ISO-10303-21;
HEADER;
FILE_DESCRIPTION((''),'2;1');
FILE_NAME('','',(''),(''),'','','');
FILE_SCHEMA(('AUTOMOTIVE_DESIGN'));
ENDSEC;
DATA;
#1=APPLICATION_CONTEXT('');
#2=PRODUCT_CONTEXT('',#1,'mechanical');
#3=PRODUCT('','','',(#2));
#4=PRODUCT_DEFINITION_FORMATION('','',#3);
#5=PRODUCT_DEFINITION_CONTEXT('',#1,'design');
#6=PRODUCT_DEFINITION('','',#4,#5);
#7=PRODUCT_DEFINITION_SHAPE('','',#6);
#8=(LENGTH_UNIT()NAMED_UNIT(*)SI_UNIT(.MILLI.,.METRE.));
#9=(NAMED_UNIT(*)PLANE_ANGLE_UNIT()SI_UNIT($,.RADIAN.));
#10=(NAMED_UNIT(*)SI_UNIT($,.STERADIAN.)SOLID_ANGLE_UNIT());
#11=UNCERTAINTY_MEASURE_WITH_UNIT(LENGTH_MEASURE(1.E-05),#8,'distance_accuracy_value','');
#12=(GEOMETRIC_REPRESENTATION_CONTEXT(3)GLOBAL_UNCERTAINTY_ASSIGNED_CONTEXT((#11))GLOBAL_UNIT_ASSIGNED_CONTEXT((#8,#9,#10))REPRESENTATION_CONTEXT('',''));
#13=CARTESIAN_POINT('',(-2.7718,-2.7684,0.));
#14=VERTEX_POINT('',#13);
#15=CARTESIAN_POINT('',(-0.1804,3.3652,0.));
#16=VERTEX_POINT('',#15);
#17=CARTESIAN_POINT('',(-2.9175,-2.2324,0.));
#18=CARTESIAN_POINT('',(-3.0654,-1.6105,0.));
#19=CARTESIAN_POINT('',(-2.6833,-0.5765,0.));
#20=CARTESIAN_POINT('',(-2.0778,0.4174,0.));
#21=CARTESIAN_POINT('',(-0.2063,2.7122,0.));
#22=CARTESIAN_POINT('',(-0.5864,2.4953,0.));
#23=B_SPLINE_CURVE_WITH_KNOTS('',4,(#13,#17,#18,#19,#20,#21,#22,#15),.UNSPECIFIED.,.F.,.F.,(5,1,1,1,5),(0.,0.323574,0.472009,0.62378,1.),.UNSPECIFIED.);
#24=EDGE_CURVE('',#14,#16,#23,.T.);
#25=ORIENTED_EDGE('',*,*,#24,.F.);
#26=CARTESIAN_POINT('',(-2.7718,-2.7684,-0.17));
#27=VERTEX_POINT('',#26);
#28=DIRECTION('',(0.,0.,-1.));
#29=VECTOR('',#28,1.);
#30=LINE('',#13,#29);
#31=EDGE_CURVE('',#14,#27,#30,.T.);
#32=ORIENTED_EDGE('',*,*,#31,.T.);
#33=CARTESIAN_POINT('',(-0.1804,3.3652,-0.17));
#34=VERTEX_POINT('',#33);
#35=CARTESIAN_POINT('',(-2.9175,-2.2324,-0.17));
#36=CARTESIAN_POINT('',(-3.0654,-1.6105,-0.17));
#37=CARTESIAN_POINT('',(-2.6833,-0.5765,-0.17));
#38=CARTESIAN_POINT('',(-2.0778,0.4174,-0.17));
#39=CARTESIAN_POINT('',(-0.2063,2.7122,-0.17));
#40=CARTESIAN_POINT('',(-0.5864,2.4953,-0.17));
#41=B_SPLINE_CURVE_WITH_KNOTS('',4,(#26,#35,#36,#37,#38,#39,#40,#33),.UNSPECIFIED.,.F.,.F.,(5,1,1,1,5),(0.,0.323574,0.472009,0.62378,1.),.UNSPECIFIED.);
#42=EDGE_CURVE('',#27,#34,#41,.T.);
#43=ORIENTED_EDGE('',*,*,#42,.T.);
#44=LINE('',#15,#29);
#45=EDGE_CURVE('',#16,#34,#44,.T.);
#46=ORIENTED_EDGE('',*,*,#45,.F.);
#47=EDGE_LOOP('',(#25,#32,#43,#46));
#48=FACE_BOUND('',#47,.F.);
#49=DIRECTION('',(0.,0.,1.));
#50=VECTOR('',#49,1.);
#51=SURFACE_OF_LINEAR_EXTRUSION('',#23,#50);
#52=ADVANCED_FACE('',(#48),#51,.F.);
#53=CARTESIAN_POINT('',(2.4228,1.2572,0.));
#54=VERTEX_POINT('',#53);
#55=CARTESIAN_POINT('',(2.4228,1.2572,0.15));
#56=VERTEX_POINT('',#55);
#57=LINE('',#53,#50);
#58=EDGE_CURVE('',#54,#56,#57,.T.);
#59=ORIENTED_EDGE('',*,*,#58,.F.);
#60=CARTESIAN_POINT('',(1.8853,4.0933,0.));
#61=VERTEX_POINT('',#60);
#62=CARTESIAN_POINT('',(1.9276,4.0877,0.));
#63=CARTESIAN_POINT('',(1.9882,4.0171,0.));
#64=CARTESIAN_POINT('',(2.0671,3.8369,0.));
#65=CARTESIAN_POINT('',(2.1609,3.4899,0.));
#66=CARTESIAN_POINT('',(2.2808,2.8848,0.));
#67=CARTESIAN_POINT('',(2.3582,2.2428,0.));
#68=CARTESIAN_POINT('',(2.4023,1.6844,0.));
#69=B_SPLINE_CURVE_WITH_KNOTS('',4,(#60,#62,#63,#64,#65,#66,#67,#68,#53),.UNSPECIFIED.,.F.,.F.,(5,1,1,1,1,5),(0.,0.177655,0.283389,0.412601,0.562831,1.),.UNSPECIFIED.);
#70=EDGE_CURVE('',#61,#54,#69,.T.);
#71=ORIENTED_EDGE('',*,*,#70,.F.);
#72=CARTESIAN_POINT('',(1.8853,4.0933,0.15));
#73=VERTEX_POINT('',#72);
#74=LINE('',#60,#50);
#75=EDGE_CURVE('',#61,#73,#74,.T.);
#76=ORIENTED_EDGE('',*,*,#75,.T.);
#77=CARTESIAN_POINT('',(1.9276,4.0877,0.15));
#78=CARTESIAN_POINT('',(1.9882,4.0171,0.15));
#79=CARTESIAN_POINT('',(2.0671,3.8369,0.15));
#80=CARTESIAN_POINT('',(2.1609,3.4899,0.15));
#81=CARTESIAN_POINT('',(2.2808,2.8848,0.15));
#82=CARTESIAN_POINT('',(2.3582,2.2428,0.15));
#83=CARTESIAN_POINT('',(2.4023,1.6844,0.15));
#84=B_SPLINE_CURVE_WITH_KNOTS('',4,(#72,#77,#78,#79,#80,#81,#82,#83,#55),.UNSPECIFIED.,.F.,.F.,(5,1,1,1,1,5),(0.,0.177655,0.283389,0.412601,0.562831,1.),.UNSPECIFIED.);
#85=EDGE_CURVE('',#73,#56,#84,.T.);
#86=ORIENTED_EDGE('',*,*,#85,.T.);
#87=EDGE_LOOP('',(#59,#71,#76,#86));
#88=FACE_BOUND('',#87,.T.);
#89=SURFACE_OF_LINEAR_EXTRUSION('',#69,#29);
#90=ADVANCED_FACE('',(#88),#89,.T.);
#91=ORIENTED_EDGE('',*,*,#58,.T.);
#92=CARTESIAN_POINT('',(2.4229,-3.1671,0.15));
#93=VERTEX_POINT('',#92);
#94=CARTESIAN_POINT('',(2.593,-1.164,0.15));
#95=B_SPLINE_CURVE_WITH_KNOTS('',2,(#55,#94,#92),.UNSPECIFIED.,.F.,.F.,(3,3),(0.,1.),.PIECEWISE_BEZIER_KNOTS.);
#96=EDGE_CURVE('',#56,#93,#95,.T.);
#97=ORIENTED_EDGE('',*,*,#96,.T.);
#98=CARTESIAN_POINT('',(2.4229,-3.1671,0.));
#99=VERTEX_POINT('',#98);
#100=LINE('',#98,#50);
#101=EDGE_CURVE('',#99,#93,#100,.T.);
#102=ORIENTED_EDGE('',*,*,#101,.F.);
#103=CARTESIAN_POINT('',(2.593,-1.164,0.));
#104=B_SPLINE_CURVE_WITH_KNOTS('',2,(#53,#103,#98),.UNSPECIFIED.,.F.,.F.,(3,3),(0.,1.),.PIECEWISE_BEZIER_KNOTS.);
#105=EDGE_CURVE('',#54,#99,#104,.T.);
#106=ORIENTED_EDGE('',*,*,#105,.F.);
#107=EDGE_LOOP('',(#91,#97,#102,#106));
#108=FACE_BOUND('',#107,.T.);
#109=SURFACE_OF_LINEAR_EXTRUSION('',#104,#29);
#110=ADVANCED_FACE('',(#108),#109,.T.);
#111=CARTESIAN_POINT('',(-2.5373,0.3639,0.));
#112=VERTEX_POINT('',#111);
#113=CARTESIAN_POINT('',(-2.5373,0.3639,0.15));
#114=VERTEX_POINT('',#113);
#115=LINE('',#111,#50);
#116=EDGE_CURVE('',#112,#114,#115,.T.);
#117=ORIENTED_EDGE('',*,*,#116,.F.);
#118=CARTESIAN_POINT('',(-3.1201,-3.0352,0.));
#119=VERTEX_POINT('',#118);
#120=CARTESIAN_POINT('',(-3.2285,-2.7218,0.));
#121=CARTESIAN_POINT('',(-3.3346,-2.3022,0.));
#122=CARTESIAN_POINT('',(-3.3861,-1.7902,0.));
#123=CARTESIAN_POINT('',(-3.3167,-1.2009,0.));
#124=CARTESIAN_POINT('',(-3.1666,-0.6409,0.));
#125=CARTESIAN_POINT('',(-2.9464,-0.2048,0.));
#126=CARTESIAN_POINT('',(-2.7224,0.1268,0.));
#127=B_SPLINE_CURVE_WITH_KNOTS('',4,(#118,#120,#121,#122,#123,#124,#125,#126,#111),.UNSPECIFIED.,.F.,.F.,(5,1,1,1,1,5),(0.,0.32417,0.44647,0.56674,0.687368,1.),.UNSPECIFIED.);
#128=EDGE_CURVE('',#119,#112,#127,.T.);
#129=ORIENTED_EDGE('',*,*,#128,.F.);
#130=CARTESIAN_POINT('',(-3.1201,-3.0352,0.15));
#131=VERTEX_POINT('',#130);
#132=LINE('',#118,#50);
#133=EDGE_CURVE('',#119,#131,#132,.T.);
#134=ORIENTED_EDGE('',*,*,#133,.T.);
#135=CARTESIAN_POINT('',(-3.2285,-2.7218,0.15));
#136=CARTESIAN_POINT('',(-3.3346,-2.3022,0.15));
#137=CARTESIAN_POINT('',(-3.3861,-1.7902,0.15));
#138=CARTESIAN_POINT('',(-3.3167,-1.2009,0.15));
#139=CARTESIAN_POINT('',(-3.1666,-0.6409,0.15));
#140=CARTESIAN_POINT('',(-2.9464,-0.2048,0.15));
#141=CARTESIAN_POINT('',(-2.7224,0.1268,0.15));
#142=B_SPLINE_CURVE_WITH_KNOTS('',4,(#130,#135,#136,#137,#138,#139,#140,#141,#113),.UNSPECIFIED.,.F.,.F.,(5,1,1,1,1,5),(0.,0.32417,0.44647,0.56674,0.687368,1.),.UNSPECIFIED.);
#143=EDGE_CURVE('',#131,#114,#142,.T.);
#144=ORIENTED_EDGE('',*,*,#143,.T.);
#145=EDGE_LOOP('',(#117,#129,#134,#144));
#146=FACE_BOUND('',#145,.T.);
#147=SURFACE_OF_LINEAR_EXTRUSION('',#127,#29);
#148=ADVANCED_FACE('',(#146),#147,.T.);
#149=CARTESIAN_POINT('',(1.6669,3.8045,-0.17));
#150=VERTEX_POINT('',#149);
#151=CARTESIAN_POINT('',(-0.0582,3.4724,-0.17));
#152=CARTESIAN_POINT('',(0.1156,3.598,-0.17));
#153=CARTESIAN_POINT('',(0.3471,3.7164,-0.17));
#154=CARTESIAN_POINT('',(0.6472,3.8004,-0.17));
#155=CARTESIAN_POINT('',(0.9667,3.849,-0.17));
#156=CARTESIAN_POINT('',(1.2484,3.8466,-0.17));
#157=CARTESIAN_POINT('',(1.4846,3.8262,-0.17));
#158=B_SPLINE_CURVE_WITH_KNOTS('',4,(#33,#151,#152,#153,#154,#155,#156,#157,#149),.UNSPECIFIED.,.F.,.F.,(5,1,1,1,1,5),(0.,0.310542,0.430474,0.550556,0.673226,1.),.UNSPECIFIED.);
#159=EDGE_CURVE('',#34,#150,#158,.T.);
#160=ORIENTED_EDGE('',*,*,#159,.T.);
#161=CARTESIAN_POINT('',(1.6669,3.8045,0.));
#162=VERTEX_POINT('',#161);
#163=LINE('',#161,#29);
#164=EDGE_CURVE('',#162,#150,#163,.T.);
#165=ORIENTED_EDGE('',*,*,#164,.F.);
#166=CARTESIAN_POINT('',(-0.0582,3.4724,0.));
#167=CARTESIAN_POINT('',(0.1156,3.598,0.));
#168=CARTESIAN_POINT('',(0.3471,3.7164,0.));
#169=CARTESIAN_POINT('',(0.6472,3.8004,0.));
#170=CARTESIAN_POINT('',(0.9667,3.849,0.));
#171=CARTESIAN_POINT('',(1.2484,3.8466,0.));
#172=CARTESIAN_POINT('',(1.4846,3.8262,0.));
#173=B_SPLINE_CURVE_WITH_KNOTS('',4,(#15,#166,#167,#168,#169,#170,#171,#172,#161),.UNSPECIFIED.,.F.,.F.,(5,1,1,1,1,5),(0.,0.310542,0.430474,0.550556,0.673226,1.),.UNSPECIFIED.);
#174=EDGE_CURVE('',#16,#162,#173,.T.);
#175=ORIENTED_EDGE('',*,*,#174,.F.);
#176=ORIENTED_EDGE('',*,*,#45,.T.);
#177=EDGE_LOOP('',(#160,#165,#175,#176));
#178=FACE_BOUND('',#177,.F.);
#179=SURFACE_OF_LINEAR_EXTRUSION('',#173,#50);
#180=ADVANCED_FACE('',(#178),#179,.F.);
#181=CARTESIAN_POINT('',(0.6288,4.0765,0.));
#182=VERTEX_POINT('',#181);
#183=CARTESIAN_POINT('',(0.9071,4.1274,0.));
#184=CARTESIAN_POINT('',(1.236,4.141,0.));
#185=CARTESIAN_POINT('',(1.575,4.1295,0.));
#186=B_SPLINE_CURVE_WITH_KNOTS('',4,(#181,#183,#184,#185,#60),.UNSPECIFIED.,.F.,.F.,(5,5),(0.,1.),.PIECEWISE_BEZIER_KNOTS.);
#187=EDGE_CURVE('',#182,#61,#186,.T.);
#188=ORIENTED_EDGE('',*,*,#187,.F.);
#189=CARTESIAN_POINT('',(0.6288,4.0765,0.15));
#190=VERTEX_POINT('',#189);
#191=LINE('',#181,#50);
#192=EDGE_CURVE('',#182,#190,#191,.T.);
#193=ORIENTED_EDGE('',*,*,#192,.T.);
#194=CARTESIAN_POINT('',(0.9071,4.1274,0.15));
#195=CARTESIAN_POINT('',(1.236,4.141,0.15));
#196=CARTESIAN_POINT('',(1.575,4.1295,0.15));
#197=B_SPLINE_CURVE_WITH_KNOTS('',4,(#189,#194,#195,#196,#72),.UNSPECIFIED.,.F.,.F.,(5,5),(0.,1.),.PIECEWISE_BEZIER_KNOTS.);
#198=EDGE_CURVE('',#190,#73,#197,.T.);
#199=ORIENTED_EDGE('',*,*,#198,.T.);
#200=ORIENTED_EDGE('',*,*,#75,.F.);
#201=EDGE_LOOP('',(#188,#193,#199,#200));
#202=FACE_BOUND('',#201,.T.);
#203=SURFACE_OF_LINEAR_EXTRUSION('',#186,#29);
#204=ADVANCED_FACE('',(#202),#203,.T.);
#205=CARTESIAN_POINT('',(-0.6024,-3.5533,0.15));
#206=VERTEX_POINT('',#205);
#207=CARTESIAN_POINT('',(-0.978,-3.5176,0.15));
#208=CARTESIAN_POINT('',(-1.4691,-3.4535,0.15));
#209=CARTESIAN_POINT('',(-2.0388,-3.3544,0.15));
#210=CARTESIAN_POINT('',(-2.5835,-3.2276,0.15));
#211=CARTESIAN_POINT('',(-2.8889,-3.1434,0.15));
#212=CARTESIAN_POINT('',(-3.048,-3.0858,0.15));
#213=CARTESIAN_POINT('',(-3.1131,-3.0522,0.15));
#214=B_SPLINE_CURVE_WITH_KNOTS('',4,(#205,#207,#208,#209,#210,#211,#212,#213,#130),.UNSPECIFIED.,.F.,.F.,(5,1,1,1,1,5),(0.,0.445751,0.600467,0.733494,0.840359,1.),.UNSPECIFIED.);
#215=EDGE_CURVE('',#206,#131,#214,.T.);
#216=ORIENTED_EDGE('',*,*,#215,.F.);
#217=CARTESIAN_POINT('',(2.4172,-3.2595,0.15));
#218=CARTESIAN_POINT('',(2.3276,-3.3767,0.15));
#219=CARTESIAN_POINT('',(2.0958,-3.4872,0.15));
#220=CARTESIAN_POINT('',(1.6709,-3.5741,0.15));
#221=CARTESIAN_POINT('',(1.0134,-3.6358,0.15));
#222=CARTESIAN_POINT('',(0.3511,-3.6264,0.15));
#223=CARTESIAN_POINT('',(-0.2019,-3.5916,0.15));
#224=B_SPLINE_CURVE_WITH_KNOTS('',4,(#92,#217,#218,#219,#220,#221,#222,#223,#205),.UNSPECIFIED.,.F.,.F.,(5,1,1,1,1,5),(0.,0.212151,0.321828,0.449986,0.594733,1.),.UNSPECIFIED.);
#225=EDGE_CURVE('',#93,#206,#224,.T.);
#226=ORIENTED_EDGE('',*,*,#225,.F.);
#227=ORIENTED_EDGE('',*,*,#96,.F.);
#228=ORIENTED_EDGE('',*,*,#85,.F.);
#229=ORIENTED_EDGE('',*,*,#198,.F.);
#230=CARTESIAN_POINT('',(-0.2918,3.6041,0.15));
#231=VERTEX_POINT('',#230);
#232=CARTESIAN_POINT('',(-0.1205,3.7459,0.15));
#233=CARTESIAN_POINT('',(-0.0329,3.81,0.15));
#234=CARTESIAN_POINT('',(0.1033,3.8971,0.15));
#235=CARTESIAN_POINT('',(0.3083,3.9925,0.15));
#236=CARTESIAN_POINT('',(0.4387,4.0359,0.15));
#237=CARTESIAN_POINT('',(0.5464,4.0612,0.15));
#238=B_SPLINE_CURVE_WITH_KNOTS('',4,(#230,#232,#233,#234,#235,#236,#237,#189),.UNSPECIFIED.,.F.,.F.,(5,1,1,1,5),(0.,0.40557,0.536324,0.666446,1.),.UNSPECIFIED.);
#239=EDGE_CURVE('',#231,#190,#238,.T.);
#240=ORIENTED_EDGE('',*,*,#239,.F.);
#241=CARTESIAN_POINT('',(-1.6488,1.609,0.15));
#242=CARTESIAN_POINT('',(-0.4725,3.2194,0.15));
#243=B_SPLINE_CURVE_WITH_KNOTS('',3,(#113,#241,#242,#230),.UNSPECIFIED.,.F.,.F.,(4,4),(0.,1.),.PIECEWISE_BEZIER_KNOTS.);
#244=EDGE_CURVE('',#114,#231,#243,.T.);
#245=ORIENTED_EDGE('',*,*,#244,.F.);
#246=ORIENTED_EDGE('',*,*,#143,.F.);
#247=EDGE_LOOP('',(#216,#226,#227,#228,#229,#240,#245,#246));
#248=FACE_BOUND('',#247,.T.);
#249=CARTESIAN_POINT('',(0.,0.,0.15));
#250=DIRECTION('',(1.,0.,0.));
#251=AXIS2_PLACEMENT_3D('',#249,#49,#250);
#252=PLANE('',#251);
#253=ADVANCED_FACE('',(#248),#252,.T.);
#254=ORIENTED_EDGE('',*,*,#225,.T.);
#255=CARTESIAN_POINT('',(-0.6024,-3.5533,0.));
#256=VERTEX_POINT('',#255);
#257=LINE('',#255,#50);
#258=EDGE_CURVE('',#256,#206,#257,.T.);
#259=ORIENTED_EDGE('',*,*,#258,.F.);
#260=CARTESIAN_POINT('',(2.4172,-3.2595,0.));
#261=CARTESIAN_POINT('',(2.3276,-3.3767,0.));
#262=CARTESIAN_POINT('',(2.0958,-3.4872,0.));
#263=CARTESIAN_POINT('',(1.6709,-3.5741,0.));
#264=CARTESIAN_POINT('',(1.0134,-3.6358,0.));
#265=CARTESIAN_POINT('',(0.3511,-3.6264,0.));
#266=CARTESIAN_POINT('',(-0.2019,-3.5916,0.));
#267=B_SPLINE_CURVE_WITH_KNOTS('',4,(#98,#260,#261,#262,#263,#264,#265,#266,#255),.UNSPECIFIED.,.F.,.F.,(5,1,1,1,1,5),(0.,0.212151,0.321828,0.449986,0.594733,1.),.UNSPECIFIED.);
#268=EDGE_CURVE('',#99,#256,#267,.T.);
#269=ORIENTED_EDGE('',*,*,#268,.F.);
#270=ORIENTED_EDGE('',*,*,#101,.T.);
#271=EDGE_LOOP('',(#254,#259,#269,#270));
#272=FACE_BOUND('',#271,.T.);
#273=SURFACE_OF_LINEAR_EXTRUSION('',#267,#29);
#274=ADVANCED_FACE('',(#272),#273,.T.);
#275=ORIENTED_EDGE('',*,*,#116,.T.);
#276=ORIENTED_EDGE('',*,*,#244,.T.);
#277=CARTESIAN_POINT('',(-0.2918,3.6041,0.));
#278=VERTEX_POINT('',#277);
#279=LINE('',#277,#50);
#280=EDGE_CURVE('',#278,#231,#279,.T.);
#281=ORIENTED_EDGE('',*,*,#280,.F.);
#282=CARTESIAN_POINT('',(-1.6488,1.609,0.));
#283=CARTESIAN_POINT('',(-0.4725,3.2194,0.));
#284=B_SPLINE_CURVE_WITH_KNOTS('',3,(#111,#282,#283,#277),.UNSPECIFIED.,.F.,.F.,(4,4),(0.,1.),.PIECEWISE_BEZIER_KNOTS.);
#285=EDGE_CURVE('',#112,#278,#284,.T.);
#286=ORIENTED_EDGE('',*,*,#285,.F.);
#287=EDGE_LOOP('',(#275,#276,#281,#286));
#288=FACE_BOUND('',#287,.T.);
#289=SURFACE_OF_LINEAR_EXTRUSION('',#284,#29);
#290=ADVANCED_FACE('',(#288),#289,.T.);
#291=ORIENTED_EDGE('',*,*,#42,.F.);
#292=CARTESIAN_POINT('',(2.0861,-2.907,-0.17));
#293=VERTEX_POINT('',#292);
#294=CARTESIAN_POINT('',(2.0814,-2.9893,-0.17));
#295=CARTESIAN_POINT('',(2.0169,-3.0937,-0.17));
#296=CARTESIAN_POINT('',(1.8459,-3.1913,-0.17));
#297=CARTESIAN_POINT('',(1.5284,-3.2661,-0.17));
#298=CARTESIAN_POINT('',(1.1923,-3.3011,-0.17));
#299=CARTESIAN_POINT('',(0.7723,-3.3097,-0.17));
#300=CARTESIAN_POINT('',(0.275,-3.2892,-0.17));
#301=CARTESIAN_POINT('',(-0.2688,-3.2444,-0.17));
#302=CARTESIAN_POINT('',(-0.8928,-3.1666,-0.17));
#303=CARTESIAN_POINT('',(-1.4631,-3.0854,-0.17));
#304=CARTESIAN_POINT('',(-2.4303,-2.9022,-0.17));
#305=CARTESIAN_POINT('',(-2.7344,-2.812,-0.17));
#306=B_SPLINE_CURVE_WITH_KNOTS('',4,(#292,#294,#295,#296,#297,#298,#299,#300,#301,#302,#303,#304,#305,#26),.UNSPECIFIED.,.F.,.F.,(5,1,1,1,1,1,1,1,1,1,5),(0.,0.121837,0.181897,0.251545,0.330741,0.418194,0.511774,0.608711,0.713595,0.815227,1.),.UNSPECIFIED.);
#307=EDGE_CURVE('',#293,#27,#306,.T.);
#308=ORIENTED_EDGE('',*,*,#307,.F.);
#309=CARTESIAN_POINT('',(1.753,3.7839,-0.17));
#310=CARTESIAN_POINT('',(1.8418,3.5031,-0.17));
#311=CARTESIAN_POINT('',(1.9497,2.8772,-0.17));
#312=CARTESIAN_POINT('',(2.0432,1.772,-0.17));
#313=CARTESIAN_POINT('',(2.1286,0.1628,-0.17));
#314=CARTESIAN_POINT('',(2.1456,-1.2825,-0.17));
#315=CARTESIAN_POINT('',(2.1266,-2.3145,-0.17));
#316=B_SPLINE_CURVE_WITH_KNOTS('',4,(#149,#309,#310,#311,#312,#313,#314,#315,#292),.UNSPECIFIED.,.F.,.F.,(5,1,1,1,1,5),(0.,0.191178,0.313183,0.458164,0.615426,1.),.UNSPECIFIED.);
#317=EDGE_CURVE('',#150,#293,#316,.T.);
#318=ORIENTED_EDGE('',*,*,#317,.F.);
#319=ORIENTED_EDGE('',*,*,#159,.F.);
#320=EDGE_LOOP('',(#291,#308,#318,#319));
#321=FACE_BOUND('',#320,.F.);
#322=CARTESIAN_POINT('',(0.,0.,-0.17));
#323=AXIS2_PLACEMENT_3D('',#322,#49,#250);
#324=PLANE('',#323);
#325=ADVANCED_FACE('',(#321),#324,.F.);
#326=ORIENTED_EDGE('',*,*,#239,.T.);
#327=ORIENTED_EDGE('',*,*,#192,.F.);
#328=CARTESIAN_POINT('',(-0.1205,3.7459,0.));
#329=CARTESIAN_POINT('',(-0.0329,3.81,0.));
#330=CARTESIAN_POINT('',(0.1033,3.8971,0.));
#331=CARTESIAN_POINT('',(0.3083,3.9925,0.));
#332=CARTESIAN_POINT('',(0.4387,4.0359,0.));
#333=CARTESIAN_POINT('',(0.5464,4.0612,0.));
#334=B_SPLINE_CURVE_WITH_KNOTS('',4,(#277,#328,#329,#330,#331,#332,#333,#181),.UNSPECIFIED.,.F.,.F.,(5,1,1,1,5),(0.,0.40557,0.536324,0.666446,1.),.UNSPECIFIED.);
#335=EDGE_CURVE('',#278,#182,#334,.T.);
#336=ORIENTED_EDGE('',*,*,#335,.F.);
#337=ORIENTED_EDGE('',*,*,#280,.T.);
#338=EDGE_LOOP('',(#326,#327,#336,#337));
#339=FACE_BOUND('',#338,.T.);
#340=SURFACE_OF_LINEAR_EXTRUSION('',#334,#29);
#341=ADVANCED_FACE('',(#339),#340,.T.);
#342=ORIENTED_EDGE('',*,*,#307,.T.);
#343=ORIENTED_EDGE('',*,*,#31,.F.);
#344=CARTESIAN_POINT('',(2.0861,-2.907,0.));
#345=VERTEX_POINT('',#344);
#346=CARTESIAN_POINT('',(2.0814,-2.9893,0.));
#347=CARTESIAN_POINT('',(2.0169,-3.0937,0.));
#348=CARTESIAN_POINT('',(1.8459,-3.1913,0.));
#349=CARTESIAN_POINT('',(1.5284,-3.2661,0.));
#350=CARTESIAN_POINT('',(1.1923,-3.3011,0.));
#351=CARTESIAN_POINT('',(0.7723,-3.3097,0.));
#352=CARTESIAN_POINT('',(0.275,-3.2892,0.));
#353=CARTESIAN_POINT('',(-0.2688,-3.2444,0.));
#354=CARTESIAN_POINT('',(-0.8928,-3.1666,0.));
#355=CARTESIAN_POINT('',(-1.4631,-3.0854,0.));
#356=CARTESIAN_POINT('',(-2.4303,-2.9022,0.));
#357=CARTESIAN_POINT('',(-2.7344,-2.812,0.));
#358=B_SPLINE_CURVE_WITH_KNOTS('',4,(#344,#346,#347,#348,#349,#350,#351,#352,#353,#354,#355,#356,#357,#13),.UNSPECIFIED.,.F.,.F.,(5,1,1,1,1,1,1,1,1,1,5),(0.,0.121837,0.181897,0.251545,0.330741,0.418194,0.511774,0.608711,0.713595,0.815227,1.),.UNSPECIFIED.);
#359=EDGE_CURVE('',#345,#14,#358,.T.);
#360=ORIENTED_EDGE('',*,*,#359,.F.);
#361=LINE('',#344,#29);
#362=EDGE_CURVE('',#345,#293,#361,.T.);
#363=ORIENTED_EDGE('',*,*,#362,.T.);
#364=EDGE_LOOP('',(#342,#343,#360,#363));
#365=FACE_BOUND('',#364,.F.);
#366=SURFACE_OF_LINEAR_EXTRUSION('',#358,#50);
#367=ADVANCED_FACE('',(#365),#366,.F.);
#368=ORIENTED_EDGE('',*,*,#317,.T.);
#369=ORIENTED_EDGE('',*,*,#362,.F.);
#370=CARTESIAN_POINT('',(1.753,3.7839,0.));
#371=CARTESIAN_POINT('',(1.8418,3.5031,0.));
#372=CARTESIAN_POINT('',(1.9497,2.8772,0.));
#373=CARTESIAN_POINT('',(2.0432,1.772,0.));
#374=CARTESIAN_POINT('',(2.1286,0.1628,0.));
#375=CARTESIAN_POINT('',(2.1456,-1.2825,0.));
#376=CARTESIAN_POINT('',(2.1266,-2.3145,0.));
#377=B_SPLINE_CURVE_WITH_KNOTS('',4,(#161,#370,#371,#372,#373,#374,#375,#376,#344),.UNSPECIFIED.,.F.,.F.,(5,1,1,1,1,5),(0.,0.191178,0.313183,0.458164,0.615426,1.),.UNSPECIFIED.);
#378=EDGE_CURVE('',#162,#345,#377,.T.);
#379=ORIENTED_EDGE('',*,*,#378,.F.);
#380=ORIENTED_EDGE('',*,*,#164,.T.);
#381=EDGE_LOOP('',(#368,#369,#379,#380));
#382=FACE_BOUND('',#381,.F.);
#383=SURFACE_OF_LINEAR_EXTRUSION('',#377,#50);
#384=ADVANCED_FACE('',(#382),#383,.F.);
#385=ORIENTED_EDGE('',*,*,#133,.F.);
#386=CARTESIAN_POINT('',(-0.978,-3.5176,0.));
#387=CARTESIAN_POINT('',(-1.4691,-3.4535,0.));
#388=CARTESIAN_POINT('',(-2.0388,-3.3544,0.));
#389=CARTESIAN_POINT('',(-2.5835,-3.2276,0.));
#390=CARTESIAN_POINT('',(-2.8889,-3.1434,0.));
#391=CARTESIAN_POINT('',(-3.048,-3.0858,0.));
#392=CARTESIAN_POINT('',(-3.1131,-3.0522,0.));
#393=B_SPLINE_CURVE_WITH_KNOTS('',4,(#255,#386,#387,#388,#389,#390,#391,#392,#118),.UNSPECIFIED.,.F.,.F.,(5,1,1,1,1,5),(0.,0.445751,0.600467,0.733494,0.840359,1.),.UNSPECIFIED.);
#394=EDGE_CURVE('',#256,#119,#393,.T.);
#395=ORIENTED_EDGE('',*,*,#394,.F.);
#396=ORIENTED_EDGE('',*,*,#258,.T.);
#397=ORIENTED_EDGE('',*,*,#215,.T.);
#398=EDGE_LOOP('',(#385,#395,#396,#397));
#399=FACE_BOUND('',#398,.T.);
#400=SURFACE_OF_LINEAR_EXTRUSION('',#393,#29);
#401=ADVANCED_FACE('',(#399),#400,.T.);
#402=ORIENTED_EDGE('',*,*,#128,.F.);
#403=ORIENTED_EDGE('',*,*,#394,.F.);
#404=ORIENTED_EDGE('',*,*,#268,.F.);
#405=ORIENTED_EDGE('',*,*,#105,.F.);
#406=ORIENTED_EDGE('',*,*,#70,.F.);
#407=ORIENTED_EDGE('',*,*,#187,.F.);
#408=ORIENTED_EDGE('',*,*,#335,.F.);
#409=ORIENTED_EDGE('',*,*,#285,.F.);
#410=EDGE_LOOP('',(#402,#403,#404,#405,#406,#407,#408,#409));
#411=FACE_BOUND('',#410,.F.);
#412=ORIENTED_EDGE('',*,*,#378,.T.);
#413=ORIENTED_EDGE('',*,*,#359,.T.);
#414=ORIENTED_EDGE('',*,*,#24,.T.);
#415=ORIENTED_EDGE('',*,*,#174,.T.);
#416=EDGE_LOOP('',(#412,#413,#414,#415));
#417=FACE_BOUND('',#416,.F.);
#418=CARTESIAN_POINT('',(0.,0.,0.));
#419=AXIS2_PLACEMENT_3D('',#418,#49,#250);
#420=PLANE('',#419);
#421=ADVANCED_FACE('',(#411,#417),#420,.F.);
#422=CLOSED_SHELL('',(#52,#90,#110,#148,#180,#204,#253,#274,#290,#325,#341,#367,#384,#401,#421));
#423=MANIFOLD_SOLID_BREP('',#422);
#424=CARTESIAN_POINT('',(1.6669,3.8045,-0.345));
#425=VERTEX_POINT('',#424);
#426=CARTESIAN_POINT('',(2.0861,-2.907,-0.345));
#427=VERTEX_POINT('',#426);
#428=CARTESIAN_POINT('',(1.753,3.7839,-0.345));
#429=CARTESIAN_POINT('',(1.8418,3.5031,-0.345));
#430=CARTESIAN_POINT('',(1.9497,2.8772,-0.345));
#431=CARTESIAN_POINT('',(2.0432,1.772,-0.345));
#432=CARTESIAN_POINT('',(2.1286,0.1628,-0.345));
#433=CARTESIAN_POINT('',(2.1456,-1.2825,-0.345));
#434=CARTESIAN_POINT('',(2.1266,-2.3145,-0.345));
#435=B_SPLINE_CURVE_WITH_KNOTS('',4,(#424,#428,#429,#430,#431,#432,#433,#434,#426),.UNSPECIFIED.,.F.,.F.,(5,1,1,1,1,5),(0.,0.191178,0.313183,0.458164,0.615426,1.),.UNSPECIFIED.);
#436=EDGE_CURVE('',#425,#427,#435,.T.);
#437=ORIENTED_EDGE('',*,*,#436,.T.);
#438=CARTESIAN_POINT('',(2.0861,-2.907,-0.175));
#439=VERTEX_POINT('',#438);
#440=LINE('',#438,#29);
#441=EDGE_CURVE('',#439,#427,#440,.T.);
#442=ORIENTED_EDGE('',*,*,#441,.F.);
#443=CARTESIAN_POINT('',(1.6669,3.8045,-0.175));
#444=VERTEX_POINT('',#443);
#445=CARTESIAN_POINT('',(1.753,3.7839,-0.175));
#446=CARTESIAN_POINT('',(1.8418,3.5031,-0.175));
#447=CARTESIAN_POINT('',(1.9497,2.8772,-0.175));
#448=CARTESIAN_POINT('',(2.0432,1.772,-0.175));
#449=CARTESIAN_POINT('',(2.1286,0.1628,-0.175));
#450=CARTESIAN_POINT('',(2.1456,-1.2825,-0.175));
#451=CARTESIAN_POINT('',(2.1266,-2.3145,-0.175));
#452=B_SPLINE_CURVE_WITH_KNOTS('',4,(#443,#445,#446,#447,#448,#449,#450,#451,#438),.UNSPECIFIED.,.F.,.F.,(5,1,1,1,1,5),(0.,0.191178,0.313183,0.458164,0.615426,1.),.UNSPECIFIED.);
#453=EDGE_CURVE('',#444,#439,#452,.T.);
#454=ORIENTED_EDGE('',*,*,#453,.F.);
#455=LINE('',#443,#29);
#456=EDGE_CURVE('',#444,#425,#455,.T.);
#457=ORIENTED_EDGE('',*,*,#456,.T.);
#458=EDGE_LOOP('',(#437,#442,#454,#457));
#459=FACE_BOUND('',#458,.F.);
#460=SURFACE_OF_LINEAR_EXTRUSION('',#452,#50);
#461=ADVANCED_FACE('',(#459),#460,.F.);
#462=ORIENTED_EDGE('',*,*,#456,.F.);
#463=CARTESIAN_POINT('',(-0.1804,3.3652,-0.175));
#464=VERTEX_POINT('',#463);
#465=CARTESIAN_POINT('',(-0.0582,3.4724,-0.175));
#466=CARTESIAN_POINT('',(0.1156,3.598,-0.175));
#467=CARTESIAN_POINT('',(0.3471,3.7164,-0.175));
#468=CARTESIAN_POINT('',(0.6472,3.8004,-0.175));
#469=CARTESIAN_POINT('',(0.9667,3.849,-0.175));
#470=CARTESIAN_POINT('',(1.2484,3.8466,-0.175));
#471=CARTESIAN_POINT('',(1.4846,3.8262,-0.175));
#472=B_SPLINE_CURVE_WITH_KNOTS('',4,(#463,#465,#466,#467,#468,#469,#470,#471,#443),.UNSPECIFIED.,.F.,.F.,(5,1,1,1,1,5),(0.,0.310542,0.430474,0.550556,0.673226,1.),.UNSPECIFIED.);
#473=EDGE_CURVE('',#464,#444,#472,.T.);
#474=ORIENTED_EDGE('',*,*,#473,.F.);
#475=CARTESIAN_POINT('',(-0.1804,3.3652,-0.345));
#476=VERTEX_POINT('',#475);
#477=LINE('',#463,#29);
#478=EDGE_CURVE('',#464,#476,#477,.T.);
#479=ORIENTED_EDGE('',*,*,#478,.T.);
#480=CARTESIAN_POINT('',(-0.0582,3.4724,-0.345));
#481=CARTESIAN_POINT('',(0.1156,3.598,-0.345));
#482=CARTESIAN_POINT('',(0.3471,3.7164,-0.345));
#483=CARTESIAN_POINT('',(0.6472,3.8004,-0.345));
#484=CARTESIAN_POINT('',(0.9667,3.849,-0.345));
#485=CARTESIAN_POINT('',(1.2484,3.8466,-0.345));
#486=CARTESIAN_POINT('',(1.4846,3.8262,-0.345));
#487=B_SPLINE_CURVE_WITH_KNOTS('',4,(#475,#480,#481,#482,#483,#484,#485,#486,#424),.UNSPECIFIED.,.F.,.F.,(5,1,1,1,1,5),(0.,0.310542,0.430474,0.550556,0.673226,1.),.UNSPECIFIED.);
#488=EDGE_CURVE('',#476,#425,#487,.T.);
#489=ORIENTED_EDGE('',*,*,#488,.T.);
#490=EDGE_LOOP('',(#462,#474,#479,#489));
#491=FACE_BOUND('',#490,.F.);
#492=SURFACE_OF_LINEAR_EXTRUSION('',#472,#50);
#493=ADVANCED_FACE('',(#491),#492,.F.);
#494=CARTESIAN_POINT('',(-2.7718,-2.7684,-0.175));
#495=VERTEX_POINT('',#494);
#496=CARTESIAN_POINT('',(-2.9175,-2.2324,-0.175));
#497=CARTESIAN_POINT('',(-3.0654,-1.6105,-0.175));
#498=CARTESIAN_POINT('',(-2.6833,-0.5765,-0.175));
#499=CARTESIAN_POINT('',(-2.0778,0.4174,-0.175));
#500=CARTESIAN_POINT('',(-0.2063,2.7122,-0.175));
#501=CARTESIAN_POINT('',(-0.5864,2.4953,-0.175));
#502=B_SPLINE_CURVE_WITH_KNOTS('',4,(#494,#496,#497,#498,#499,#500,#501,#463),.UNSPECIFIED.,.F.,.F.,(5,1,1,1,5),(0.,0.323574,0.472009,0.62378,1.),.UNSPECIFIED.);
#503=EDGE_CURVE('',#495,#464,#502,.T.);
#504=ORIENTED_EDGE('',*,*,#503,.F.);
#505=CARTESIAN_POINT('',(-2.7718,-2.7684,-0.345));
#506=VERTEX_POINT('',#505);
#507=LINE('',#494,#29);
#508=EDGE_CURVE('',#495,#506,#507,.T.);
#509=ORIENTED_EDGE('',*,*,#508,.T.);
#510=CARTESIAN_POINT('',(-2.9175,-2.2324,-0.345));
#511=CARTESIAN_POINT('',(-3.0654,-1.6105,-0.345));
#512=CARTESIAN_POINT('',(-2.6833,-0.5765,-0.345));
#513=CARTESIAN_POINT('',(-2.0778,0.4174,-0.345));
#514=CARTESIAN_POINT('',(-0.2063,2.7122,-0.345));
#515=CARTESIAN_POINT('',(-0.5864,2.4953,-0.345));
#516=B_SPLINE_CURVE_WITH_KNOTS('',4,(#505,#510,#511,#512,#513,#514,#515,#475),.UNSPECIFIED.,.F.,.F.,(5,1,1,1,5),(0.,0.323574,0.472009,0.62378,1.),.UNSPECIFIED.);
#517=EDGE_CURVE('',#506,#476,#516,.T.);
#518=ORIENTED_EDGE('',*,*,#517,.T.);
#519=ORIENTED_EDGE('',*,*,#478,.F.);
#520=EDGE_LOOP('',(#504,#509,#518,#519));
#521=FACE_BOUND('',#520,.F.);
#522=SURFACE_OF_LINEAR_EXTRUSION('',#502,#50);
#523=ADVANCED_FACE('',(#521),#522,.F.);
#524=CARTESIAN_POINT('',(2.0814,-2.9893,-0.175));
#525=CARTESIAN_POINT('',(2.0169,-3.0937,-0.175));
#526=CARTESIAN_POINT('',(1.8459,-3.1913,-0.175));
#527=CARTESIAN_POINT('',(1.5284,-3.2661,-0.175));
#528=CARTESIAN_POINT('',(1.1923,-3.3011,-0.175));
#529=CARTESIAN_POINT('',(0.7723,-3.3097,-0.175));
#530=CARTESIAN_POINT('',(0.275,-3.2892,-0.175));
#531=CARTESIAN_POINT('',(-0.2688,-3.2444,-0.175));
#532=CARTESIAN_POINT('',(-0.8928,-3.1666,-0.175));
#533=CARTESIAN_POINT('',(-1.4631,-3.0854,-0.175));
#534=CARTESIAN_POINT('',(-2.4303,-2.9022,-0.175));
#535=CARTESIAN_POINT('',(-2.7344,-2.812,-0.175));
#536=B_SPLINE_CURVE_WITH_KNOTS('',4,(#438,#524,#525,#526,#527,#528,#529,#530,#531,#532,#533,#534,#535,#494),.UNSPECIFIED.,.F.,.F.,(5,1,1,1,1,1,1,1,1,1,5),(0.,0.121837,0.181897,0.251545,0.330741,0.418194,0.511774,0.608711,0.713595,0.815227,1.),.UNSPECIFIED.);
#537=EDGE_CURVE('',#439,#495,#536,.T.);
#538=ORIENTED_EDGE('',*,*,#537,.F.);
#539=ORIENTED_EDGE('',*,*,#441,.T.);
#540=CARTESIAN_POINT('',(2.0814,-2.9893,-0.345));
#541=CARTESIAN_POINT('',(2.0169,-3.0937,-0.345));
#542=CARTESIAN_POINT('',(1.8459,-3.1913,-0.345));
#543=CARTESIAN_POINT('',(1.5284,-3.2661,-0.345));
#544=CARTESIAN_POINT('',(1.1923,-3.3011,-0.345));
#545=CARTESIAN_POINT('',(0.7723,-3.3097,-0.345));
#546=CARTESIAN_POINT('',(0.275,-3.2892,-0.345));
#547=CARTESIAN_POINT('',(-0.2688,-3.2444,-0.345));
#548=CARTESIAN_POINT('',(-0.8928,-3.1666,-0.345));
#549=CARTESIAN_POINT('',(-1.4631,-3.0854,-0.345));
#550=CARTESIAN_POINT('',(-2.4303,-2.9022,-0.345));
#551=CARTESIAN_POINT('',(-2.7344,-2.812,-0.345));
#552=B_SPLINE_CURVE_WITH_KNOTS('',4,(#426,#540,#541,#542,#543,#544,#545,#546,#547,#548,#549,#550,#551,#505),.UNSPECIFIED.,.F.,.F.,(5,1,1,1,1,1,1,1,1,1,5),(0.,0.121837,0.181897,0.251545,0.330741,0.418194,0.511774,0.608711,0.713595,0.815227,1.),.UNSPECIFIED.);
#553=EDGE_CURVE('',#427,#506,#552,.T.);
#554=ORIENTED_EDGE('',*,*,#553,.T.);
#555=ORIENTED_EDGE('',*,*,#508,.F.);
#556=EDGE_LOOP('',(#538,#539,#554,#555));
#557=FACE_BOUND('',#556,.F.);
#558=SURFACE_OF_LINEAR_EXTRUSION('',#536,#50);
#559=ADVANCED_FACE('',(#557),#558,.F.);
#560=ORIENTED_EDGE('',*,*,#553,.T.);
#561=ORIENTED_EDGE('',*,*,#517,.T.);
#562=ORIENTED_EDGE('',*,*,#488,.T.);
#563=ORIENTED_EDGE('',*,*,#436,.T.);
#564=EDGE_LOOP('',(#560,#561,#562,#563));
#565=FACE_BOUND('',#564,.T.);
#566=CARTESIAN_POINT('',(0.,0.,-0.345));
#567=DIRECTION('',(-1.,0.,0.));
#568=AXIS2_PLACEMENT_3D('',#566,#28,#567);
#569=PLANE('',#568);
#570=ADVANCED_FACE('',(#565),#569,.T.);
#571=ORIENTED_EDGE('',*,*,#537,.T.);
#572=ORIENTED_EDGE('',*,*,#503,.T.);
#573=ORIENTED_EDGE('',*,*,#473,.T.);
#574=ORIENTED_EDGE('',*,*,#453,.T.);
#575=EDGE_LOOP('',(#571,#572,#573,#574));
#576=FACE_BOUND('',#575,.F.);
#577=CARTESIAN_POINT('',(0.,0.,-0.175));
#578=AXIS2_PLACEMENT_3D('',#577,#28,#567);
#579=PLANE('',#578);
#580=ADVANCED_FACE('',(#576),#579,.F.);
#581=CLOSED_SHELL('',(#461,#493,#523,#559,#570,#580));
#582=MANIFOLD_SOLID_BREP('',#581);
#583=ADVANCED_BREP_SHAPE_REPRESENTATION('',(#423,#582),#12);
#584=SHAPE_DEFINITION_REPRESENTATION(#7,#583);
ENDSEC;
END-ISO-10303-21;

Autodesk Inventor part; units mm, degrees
ref_plane "YZ Plane" through (0, 0, 0) normal (1, 0, 0) x (0, 1, 0)
ref_plane "XZ Plane" through (0, 0, 0) normal (0, 1, 0) x (-1, 0, 0)
sketch "Sketch1-Imported DXF File" plane through (0, 0, 0) normal (0, 0, 1) x (1, 0, 0)
  spline S0 degree 3 poles (-0.1804, 3.3652) (0.3809, 3.8577) (0.9425, 3.8911) (1.6669, 3.8045) knots 0 0 0 0 1 1 1 1
  line L0 (-0.1804, 3.3652) -> (0.3809, 3.8577) construction
  line L1 (0.3809, 3.8577) -> (0.9425, 3.8911) construction
  line L2 (0.9425, 3.8911) -> (1.6669, 3.8045) construction
  spline S1 degree 3 poles (1.6669, 3.8045) (2.052, 3.7584) (2.2228, -0.9315) (2.0861, -2.907) knots 1 1 1 1 2 2 2 2
  line L3 (1.6669, 3.8045) -> (2.052, 3.7584) construction
  line L4 (2.052, 3.7584) -> (2.2228, -0.9315) construction
  line L5 (2.2228, -0.9315) -> (2.0861, -2.907) construction
  spline S2 degree 3 poles (2.0861, -2.907) (2.0239, -3.807) (-2.7213, -2.918) (-2.7718, -2.7684) knots 2 2 2 2 3 3 3 3
  line L6 (2.0861, -2.907) -> (2.0239, -3.807) construction
  line L7 (2.0239, -3.807) -> (-2.7213, -2.918) construction
  line L8 (-2.7213, -2.918) -> (-2.7718, -2.7684) construction
  spline S3 degree 3 poles (-2.7718, -2.7684) (-3.6279, -0.2341) (-0.832, 1.069) (-0.1804, 3.3652) knots 3 3 3 3 4 4 4 4
  line L9 (-2.7718, -2.7684) -> (-3.6279, -0.2341) construction
  line L10 (-3.6279, -0.2341) -> (-0.832, 1.069) construction
  line L11 (-0.832, 1.069) -> (-0.1804, 3.3652) construction
  spline S4 degree 3 poles (-0.2918, 3.6041) (0.022, 3.8725) (0.2642, 4.0092) (0.6288, 4.0765) knots 0 0 0 0 1 1 1 1
  line L12 (-0.2918, 3.6041) -> (0.022, 3.8725) construction
  line L13 (0.022, 3.8725) -> (0.2642, 4.0092) construction
  line L14 (0.2642, 4.0092) -> (0.6288, 4.0765) construction
  spline S5 degree 3 poles (0.6288, 4.0765) (0.9935, 4.1434) (1.4802, 4.1406) (1.8853, 4.0933) knots 1 1 1 1 2 2 2 2
  line L15 (0.6288, 4.0765) -> (0.9935, 4.1434) construction
  line L16 (0.9935, 4.1434) -> (1.4802, 4.1406) construction
  line L17 (1.4802, 4.1406) -> (1.8853, 4.0933) construction
  spline S6 degree 3 poles (1.8853, 4.0933) (2.1007, 4.068) (2.348, 2.7989) (2.4228, 1.2572) knots 2 2 2 2 3 3 3 3
  line L18 (1.8853, 4.0933) -> (2.1007, 4.068) construction
  line L19 (2.1007, 4.068) -> (2.348, 2.7989) construction
  line L20 (2.348, 2.7989) -> (2.4228, 1.2572) construction
  spline S7 degree 3 poles (2.4228, 1.2572) (2.5251, -0.8485) (2.5466, -1.4274) (2.4229, -3.1671) knots 3 3 3 3 4 4 4 4
  line L21 (2.4228, 1.2572) -> (2.5251, -0.8485) construction
  line L22 (2.5251, -0.8485) -> (2.5466, -1.4274) construction
  line L23 (2.5466, -1.4274) -> (2.4229, -3.1671) construction
  spline S8 degree 3 poles (2.4229, -3.1671) (2.3865, -3.6579) (0.7942, -3.6867) (-0.6024, -3.5533) knots 4 4 4 4 5 5 5 5
  line L24 (2.4229, -3.1671) -> (2.3865, -3.6579) construction
  line L25 (2.3865, -3.6579) -> (0.7942, -3.6867) construction
  line L26 (0.7942, -3.6867) -> (-0.6024, -3.5533) construction
  spline S9 degree 3 poles (-0.6024, -3.5533) (-1.9971, -3.4205) (-3.0918, -3.117) (-3.1201, -3.0352) knots 5 5 5 5 6 6 6 6
  line L27 (-0.6024, -3.5533) -> (-1.9971, -3.4205) construction
  line L28 (-1.9971, -3.4205) -> (-3.0918, -3.117) construction
  line L29 (-3.0918, -3.117) -> (-3.1201, -3.0352) construction
  spline S10 degree 3 poles (-3.1201, -3.0352) (-3.5986, -1.6526) (-3.3227, -0.6417) (-2.5373, 0.3639) knots 6 6 6 6 7 7 7 7
  line L30 (-3.1201, -3.0352) -> (-3.5986, -1.6526) construction
  line L31 (-3.5986, -1.6526) -> (-3.3227, -0.6417) construction
  line L32 (-3.3227, -0.6417) -> (-2.5373, 0.3639) construction
  spline S11 degree 3 poles (-2.5373, 0.3639) (-2.5757, 0.3147) (-0.3637, 3.3574) (-0.2918, 3.6041) knots 7 7 7 7 8 8 8 8
  line L33 (-2.5373, 0.3639) -> (-2.5757, 0.3147) construction
  line L34 (-2.5757, 0.3147) -> (-0.3637, 3.3574) construction
  line L35 (-0.3637, 3.3574) -> (-0.2918, 3.6041) construction
  point P0 (0, 0)
sketch "Sketch2" plane through (0, 0, 0) normal (0, 0, 1) x (1, 0, 0)
  spline S0 degree 3 poles (-2.5373, 0.3639) (-1.6488, 1.609) (-0.4725, 3.2194) (-0.2918, 3.6041) knots 0 0 0 0 1 1 1 1
  spline S1 degree 4 poles (-0.2918, 3.6041) (-0.1205, 3.7459) (-0.0329, 3.81) (0.1033, 3.8971) (0.3083, 3.9925) (0.4387, 4.0359) (0.5464, 4.0612) (0.6288, 4.0765) knots 0 0 0 0 0 0.40557 0.536324 0.666446 1 1 1 1 1
  spline S2 degree 4 poles (0.6288, 4.0765) (0.9071, 4.1274) (1.236, 4.141) (1.575, 4.1295) (1.8853, 4.0933) knots 0 0 0 0 0 1 1 1 1 1
  spline S3 degree 4 poles (1.8853, 4.0933) (1.9276, 4.0877) (1.9882, 4.0171) (2.0671, 3.8369) (2.1609, 3.4899) (2.2808, 2.8848) (2.3582, 2.2428) (2.4023, 1.6844) (2.4228, 1.2572) knots 0 0 0 0 0 0.177655 0.283389 0.412601 0.562831 1 1 1 1 1
  spline S4 degree 2 poles (2.4228, 1.2572) (2.593, -1.164) (2.4229, -3.1671) knots 0 0 0 1 1 1
  spline S5 degree 4 poles (2.4229, -3.1671) (2.4172, -3.2595) (2.3276, -3.3767) (2.0958, -3.4872) (1.6709, -3.5741) (1.0134, -3.6358) (0.3511, -3.6264) (-0.2019, -3.5916) (-0.6024, -3.5533) knots 0 0 0 0 0 0.212151 0.321828 0.449986 0.594733 1 1 1 1 1
  spline S6 degree 4 poles (-0.6024, -3.5533) (-0.978, -3.5176) (-1.4691, -3.4535) (-2.0388, -3.3544) (-2.5835, -3.2276) (-2.8889, -3.1434) (-3.048, -3.0858) (-3.1131, -3.0522) (-3.1201, -3.0352) knots 0 0 0 0 0 0.445751 0.600467 0.733494 0.840359 1 1 1 1 1
  spline S7 degree 4 poles (-3.1201, -3.0352) (-3.2285, -2.7218) (-3.3346, -2.3022) (-3.3861, -1.7902) (-3.3167, -1.2009) (-3.1666, -0.6409) (-2.9464, -0.2048) (-2.7224, 0.1268) (-2.5373, 0.3639) knots 0 0 0 0 0 0.32417 0.44647 0.56674 0.687368 1 1 1 1 1
  point P0 (0, 0)
  point P1 (-1.292, 2.1047)
  point P2 (-0.5022, 3.2501)
  point P3 (-0.0522, 3.7921)
  point P4 (0.0556, 3.8626)
  point P5 (0.161, 3.9217)
  point P6 (0.2674, 3.9714)
  point P7 (0.3783, 4.0131)
  point P8 (0.4974, 4.0479)
  point P9 (0.9057, 4.1126)
  point P10 (1.2248, 4.1276)
  point P11 (1.5614, 4.1204)
  point P12 (1.9311, 4.07)
  point P13 (1.9884, 3.9938)
  point P14 (2.0595, 3.8309)
  point P15 (2.1406, 3.5531)
  point P16 (2.2254, 3.1463)
  point P17 (2.3061, 2.6141)
  point P18 (2.3745, 1.9749)
  point P19 (2.5077, -1.1636)
  point P20 (2.3812, -3.282)
  point P21 (2.2671, -3.3858)
  point P22 (2.057, -3.4798)
  point P23 (1.7287, -3.556)
  point P24 (1.2755, -3.6054)
  point P25 (0.7111, -3.6217)
  point P26 (0.0687, -3.6033)
  point P27 (-1.2291, -3.4803)
  point P28 (-1.7932, -3.3917)
  point P29 (-2.2714, -3.2978)
  point P30 (-2.6442, -3.2091)
  point P31 (-2.9004, -3.1353)
  point P32 (-3.0452, -3.0825)
  point P33 (-3.1053, -3.051)
  point P34 (-3.2685, -2.516)
  point P35 (-3.343, -2.0448)
  point P36 (-3.3527, -1.6099)
  point P37 (-3.3039, -1.2004)
  point P38 (-3.1992, -0.8068)
  point P39 (-3.0385, -0.4203)
  point P40 (-2.8193, -0.0327)
extrude "Extrusion1-Larger Window" add sketch "Sketch2" along normal blind 0.15
sketch "Sketch3" plane through (0, 0, 0) normal (0, 0, 1) x (1, 0, 0)
  spline S0 degree 4 poles (-2.7718, -2.7684) (-2.9175, -2.2324) (-3.0654, -1.6105) (-2.6833, -0.5765) (-2.0778, 0.4174) (-0.2063, 2.7122) (-0.5864, 2.4953) (-0.1804, 3.3652) knots 0 0 0 0 0 0.323574 0.472009 0.62378 1 1 1 1 1
  spline S1 degree 4 poles (-0.1804, 3.3652) (-0.0582, 3.4724) (0.1156, 3.598) (0.3471, 3.7164) (0.6472, 3.8004) (0.9667, 3.849) (1.2484, 3.8466) (1.4846, 3.8262) (1.6669, 3.8045) knots 0 0 0 0 0 0.310542 0.430474 0.550556 0.673226 1 1 1 1 1
  spline S2 degree 4 poles (1.6669, 3.8045) (1.753, 3.7839) (1.8418, 3.5031) (1.9497, 2.8772) (2.0432, 1.772) (2.1286, 0.1628) (2.1456, -1.2825) (2.1266, -2.3145) (2.0861, -2.907) knots 0 0 0 0 0 0.191178 0.313183 0.458164 0.615426 1 1 1 1 1
  spline S3 degree 4 poles (2.0861, -2.907) (2.0814, -2.9893) (2.0169, -3.0937) (1.8459, -3.1913) (1.5284, -3.2661) (1.1923, -3.3011) (0.7723, -3.3097) (0.275, -3.2892) (-0.2688, -3.2444) (-0.8928, -3.1666) (-1.4631, -3.0854) (-2.4303, -2.9022) (-2.7344, -2.812) (-2.7718, -2.7684) knots 0 0 0 0 0 0.121837 0.181897 0.251545 0.330741 0.418194 0.511774 0.608711 0.713595 0.815227 1 1 1 1 1
  point P0 (0, 0)
  point P1 (0.0266, 3.5263)
  point P2 (0.2302, 3.6471)
  point P3 (0.435, 3.7348)
  point P4 (0.6457, 3.7943)
  point P5 (0.8675, 3.8291)
  point P6 (1.1063, 3.8415)
  point P7 (1.3693, 3.8329)
  point P8 (1.737, 3.7424)
  point P9 (1.8285, 3.4825)
  point P10 (1.9312, 2.8876)
  point P11 (2.0254, 1.9214)
  point P12 (2.0951, 0.6699)
  point P13 (2.1298, -0.6901)
  point P14 (2.1256, -1.9444)
  point P15 (2.0516, -3.0154)
  point P16 (1.9634, -3.1075)
  point P17 (1.8086, -3.1872)
  point P18 (1.5702, -3.2508)
  point P19 (1.2383, -3.2915)
  point P20 (0.813, -3.3041)
  point P21 (0.3073, -3.2867)
  point P22 (-0.2547, -3.2408)
  point P23 (-0.8389, -3.1716)
  point P24 (-1.4037, -3.0874)
  point P25 (-2.3015, -2.9158)
  point P26 (-2.71, -2.8043)
  point P27 (-2.9305, -1.9534)
  point P28 (-2.8622, -1.2244)
  point P29 (-2.6092, -0.5289)
  point P30 (-2.1892, 0.1783)
  point P31 (-0.9618, 1.8213)
  point P32 (-0.4934, 2.5857)
extrude "Extrusion2" add sketch "Sketch3" against normal blind 0.17
ref_plane "Work Plane1" through (0, 0, -0.175) normal (0, 0, -1) x (-1, 0, 0)
sketch "Sketch4" plane through (0, 0, -0.175) normal (0, 0, -1) x (-1, 0, 0)
  spline S0 degree 4 poles (2.7718, -2.7684) (2.9175, -2.2324) (3.0654, -1.6105) (2.6833, -0.5765) (2.0778, 0.4174) (0.2063, 2.7122) (0.5864, 2.4953) (0.1804, 3.3652) knots 0 0 0 0 0 0.323574 0.472009 0.62378 1 1 1 1 1 projected
  spline S1 degree 4 poles (0.1804, 3.3652) (0.0582, 3.4724) (-0.1156, 3.598) (-0.3471, 3.7164) (-0.6472, 3.8004) (-0.9667, 3.849) (-1.2484, 3.8466) (-1.4846, 3.8262) (-1.6669, 3.8045) knots 0 0 0 0 0 0.310542 0.430474 0.550556 0.673226 1 1 1 1 1 projected
  spline S2 degree 4 poles (-1.6669, 3.8045) (-1.753, 3.7839) (-1.8418, 3.5031) (-1.9497, 2.8772) (-2.0432, 1.772) (-2.1286, 0.1628) (-2.1456, -1.2825) (-2.1266, -2.3145) (-2.0861, -2.907) knots 0 0 0 0 0 0.191178 0.313183 0.458164 0.615426 1 1 1 1 1 projected
  spline S3 degree 4 poles (-2.0861, -2.907) (-2.0814, -2.9893) (-2.0169, -3.0937) (-1.8459, -3.1913) (-1.5284, -3.2661) (-1.1923, -3.3011) (-0.7723, -3.3097) (-0.275, -3.2892) (0.2688, -3.2444) (0.8928, -3.1666) (1.4631, -3.0854) (2.4303, -2.9022) (2.7344, -2.812) (2.7718, -2.7684) knots 0 0 0 0 0 0.121837 0.181897 0.251545 0.330741 0.418194 0.511774 0.608711 0.713595 0.815227 1 1 1 1 1 projected
  point P0 (0, 0)
extrude "Extrusion3" add sketch "Sketch4" along normal blind 0.17
sketch "Sketch5" plane through (0, 0, 0) normal (0, 0, 1) x (1, 0, 0)
  line L0 (-3.3583, -0.7328) -> (-3.3583, -3.6344)
  line L1 (2.5057, -3.6344) -> (2.5057, 4.1337)
  line L2 (0.1055, 4.1337) -> (2.5057, 4.1337)
  line L3 (-3.3583, -3.6344) -> (2.5057, -3.6344)
  line L4 (-3.3583, -0.7328) -> (0.1055, 4.1337)
  point P0 (0, 0)
  dimension "d7" = 5.864
  dimension "d8" = 7.7681
  dimension "d9" = 2.9016
  dimension "d10" = 2.4002
  dimension "d11" = 144.558
properties material "GLASS, BOROSILICATE"
